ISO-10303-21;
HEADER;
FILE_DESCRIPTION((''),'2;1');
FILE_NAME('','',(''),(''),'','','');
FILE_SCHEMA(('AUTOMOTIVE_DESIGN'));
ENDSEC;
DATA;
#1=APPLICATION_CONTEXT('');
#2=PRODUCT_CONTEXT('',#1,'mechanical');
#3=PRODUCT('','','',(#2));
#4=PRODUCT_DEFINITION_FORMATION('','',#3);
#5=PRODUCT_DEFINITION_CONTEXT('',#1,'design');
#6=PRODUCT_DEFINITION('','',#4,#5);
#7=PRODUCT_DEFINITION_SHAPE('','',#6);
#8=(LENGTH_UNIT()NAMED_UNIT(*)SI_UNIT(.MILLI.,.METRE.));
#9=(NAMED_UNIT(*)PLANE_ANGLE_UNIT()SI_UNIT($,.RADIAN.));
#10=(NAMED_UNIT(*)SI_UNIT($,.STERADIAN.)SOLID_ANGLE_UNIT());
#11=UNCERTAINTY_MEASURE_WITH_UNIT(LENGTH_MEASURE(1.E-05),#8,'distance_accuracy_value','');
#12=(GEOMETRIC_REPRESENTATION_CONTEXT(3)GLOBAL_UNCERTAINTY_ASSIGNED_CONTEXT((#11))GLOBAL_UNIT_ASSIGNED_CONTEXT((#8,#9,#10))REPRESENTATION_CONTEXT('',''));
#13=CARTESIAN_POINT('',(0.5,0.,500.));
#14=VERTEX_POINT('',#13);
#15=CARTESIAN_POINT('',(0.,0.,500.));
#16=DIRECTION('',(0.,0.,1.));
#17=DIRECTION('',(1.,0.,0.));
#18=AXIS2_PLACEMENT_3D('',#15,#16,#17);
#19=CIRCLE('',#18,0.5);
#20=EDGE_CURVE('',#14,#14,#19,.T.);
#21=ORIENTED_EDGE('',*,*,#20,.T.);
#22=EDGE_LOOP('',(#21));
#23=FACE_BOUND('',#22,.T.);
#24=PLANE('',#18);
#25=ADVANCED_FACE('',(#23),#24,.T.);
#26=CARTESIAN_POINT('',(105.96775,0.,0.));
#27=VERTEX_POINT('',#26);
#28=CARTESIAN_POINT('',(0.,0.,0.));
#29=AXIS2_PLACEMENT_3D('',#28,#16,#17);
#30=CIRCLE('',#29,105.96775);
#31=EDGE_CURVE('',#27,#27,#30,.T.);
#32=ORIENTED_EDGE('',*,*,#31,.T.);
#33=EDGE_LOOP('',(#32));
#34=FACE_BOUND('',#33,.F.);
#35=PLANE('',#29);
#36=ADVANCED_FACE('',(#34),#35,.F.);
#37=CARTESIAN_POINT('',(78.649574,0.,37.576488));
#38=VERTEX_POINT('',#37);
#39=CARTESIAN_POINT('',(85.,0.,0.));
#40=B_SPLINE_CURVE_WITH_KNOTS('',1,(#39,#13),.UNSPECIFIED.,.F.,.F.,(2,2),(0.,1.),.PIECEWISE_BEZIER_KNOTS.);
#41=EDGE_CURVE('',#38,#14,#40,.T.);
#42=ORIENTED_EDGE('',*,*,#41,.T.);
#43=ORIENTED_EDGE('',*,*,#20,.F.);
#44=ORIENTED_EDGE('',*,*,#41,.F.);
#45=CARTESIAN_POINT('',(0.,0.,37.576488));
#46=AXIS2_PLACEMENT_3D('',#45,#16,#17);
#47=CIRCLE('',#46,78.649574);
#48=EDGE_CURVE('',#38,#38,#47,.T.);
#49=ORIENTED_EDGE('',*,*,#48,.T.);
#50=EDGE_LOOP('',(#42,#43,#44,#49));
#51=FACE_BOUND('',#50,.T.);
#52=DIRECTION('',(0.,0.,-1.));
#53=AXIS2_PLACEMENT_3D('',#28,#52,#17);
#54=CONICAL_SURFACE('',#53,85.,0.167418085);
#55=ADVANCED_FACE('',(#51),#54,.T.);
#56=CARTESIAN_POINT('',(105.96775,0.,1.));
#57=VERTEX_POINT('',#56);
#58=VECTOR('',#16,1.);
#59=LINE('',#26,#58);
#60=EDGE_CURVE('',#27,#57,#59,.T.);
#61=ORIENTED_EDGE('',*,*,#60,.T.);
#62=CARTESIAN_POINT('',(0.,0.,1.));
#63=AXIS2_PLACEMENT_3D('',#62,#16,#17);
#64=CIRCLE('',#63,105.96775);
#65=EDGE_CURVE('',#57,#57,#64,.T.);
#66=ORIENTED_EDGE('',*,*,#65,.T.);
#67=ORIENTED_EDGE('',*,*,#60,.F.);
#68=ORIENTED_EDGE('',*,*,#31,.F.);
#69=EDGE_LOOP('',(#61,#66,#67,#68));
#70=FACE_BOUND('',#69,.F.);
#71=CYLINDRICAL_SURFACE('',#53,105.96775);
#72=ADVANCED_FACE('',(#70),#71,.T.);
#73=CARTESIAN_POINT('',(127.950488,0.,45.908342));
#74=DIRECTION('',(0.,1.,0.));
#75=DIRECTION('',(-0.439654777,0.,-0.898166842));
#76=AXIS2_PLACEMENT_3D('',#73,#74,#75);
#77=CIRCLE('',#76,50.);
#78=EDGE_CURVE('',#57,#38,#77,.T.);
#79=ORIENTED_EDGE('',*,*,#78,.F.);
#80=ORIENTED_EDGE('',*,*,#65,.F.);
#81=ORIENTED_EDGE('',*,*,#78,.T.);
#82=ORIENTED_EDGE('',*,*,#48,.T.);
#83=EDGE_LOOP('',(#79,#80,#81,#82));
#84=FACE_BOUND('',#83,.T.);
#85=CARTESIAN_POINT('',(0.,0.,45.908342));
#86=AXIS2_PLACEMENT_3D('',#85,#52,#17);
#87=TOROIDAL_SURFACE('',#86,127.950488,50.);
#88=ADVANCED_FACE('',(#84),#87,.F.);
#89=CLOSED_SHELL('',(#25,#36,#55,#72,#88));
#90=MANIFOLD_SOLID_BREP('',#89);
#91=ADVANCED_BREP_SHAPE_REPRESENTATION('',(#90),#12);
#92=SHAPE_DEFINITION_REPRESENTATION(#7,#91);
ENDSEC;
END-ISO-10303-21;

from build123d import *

# Parameters (mm, degrees)
F0_R     = 85
F2_R     = 0.5
F4_R     = 105.9677495378
F5_DEPTH = 1


# Not quite as in the source:
# - a fillet or chamfer that OpenCascade refuses, or shapes differently, is made with other operations: its cross-section is extruded or revolved along the edge and cut away or added


with BuildPart() as f3:
    # F0 (on Top) → F3 section 0
    with BuildSketch(Plane.XY):
        Circle(F0_R)
    # F2 (on offset) → F3 section 1
    with BuildSketch(Plane.XY.offset(500)):
        Circle(F2_R)
    loft()

    # F4 (on Top) → F5 (join)
    with BuildSketch(Plane.XY):
        Circle(F4_R)
    extrude(amount=F5_DEPTH)

    # F6: fillet of radius 50 on 1 edges, made by hand

    # F6_s1 → F6_t2 (revolve)
    with BuildSketch(Plane.XZ):
        with BuildLine():
            ThreePointArc((105.9677495378, 1), (87.890537333, 15.9884437146), (78.6495736084, 37.5764875242))
            Line((78.6495736084, 37.5764875242), (84.831, 1))
            Line((84.831, 1), (105.9677495378, 1))
        make_face()
    revolve(axis=Axis((0, 0, 1), (0, 0, 1)))


solid = f3.part
